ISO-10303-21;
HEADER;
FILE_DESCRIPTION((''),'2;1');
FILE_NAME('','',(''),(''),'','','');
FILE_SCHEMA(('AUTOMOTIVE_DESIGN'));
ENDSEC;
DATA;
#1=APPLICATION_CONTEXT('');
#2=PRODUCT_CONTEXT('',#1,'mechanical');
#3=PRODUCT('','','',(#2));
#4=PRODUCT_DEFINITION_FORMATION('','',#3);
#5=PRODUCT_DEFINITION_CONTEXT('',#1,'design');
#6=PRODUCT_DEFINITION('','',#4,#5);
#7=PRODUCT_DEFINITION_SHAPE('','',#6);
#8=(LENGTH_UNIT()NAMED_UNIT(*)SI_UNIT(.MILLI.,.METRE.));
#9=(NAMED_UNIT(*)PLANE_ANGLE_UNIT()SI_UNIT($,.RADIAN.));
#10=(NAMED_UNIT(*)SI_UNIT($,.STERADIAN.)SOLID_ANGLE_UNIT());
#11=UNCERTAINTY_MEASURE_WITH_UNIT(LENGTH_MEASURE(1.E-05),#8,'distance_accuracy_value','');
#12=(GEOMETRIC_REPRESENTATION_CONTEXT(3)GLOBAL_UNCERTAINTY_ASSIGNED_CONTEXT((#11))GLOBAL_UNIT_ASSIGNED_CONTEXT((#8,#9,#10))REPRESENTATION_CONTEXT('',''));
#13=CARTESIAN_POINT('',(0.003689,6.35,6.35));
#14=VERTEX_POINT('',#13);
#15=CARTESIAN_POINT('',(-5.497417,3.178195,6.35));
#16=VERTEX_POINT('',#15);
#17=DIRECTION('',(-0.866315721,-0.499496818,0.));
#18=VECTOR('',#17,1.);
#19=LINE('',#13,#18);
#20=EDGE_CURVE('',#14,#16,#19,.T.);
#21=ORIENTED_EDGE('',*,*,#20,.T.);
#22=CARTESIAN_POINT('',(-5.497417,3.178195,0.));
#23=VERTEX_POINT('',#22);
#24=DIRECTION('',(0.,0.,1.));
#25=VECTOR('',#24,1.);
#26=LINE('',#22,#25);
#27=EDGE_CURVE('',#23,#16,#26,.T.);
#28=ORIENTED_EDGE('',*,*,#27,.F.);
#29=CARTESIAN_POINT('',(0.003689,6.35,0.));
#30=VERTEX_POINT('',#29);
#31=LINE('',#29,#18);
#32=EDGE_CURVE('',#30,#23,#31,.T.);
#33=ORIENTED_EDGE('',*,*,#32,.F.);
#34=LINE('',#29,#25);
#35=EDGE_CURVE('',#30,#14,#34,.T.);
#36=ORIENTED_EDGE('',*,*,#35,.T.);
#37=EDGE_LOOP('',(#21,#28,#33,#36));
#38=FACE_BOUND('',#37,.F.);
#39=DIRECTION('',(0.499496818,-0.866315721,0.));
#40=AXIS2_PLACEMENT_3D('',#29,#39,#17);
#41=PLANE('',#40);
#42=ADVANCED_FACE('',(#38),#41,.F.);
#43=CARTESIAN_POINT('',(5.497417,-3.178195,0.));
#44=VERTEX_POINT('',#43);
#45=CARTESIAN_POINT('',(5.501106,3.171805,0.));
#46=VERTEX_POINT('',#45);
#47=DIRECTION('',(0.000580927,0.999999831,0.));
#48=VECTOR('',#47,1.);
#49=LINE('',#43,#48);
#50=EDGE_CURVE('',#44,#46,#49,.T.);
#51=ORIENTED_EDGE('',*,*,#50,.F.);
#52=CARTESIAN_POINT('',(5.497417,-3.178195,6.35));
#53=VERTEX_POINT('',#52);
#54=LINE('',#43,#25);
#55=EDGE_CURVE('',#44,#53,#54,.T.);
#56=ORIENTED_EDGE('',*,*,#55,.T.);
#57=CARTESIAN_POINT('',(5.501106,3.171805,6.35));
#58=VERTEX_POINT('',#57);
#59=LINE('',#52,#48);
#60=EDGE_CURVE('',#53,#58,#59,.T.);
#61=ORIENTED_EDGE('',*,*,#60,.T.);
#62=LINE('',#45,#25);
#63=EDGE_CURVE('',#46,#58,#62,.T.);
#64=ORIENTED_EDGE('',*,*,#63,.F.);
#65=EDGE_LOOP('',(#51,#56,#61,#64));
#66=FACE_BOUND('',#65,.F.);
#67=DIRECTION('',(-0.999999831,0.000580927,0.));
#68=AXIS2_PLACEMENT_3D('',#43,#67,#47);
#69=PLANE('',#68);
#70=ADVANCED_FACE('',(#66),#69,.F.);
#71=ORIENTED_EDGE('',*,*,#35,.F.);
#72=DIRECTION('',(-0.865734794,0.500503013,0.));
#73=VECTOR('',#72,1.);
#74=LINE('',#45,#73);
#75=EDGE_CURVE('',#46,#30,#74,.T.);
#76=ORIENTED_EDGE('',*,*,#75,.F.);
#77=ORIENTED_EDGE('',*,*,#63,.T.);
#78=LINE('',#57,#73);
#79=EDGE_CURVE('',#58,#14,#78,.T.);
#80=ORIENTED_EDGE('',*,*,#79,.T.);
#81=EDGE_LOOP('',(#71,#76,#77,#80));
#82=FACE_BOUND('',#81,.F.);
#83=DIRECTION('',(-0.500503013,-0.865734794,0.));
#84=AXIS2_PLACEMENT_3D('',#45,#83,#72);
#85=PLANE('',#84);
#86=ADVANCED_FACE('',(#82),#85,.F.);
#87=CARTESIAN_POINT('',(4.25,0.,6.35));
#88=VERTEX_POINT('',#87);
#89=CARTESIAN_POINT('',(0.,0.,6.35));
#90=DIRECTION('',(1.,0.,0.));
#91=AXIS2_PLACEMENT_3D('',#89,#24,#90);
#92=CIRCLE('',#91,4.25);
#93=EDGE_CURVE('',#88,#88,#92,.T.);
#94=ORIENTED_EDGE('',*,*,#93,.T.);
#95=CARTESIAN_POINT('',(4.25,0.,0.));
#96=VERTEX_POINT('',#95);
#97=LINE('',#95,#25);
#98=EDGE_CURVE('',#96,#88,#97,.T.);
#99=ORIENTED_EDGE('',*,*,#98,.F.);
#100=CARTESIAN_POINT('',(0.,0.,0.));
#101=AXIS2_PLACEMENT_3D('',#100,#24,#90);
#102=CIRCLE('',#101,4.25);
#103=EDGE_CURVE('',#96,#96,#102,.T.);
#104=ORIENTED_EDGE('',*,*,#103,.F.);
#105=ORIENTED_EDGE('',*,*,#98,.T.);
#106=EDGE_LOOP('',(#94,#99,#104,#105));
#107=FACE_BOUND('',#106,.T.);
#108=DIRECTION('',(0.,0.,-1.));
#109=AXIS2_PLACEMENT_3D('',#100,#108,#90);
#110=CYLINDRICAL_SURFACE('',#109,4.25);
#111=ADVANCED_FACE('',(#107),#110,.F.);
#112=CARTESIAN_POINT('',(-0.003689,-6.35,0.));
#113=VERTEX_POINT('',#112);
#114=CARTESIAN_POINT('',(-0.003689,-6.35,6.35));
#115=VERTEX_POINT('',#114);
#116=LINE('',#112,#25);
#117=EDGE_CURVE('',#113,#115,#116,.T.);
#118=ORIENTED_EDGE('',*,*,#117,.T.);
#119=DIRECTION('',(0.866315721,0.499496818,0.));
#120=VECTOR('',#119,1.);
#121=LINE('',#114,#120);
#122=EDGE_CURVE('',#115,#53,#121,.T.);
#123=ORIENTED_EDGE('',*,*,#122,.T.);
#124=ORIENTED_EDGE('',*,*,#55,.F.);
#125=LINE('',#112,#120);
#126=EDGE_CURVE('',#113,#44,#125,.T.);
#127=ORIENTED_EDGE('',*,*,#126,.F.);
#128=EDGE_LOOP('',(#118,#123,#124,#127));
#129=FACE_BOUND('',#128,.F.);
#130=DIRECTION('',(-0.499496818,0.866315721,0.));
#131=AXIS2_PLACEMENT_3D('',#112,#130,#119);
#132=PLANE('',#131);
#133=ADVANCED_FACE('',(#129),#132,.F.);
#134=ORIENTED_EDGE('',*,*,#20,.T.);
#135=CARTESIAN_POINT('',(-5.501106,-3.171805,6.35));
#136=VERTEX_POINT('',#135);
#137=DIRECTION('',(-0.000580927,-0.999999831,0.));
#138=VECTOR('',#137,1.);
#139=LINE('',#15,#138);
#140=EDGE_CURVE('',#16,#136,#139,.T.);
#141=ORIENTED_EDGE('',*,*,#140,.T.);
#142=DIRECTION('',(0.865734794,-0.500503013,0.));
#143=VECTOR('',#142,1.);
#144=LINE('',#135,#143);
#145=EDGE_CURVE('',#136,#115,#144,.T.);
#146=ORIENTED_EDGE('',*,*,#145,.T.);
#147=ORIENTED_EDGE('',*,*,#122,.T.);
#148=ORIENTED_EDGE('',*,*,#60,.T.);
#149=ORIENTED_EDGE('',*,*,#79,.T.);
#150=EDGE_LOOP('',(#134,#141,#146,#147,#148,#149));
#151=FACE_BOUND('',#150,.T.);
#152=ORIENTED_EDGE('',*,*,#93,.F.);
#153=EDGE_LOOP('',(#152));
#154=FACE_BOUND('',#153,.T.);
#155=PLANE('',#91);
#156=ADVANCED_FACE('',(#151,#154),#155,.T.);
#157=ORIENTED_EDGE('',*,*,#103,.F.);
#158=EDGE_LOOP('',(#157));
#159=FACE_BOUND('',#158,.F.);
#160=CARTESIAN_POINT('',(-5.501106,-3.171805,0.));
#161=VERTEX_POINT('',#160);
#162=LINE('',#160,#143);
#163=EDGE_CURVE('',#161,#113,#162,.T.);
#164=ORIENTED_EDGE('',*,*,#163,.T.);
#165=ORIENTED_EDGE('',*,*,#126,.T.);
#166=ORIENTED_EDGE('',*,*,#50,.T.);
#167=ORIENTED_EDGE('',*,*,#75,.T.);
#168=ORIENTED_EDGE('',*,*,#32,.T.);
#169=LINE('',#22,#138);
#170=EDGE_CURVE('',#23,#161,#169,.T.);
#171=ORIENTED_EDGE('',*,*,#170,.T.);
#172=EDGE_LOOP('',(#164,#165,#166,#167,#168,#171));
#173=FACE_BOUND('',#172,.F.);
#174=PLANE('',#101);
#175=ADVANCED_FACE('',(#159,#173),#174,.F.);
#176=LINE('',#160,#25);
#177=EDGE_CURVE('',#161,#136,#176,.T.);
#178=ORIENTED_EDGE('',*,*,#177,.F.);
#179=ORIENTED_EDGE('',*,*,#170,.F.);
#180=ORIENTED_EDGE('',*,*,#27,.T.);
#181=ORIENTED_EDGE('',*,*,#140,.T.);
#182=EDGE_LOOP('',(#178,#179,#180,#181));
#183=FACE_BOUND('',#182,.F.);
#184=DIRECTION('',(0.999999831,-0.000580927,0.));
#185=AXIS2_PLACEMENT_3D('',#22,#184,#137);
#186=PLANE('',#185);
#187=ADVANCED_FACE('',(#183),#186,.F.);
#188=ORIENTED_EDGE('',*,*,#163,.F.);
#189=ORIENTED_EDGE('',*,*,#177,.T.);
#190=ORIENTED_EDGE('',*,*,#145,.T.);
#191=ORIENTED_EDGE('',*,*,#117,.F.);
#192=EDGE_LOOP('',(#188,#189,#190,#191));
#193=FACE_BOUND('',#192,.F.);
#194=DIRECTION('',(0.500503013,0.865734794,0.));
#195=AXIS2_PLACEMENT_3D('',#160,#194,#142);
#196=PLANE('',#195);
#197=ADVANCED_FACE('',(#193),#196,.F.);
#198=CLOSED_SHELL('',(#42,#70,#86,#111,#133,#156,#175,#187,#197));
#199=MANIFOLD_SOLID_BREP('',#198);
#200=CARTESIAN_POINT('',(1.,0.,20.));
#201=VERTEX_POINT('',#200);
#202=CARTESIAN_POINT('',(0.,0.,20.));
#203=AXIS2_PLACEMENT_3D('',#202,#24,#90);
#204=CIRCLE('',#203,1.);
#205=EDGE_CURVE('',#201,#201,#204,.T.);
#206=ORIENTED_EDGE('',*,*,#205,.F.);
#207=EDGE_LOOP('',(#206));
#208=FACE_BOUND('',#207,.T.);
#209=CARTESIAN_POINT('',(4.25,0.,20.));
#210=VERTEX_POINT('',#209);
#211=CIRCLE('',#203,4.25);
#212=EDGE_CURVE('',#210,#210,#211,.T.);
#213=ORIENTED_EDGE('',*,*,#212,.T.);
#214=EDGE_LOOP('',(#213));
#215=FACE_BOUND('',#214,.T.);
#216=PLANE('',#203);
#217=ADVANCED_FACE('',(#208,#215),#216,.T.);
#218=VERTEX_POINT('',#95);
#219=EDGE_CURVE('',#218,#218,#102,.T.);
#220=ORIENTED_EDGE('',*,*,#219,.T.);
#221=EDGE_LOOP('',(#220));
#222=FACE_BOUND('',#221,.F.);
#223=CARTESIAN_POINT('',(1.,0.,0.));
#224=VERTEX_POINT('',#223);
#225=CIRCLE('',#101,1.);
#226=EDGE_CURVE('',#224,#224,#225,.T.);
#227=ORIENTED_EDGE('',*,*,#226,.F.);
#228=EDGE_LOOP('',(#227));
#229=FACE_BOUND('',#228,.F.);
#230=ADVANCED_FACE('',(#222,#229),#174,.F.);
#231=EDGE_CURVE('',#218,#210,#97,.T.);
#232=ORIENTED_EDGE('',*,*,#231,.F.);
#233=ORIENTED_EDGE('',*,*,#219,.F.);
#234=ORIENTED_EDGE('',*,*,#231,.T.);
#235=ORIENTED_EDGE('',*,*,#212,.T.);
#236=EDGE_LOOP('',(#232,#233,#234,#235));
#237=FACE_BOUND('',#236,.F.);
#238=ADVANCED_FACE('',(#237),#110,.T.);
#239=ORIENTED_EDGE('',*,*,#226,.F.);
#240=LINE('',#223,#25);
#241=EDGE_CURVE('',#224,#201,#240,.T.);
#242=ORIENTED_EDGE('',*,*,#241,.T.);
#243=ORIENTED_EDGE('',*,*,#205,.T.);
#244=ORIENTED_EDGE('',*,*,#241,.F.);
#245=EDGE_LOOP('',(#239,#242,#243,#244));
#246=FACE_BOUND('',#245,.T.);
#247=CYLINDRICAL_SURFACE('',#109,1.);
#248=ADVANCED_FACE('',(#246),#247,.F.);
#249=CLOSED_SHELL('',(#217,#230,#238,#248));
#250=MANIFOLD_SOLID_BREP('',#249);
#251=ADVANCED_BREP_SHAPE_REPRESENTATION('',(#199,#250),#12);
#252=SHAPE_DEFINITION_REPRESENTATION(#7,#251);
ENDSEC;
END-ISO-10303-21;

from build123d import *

# Parameters (mm, degrees)
F0_R     = 4.25
F1_DEPTH = 6.35
F0_R_2   = 1
F2_DEPTH = 20


# Not quite as in the source:
# - a feature names something its author has since deleted; it is built from what else it names


with BuildPart() as f1:
    # F0 (on Top) → F1 (new body)
    with BuildSketch(Plane.XY):
        Polygon((5.5011057574, 3.1718053303), (0.0036888868, 6.35), (-5.4974168706, 3.1781946697), (-5.5011057574, -3.1718053303), (-0.0036888868, -6.35), (5.4974168706, -3.1781946697), align=None)
        Circle(F0_R, mode=Mode.SUBTRACT)
    extrude(amount=F1_DEPTH)


with BuildPart() as f2:
    # F0 (on Top) → F2 (new body)
    with BuildSketch(Plane.XY):
        Circle(F0_R)
        Circle(F0_R_2, mode=Mode.SUBTRACT)
    extrude(amount=F2_DEPTH)


solid = Compound([f1.part, f2.part])
